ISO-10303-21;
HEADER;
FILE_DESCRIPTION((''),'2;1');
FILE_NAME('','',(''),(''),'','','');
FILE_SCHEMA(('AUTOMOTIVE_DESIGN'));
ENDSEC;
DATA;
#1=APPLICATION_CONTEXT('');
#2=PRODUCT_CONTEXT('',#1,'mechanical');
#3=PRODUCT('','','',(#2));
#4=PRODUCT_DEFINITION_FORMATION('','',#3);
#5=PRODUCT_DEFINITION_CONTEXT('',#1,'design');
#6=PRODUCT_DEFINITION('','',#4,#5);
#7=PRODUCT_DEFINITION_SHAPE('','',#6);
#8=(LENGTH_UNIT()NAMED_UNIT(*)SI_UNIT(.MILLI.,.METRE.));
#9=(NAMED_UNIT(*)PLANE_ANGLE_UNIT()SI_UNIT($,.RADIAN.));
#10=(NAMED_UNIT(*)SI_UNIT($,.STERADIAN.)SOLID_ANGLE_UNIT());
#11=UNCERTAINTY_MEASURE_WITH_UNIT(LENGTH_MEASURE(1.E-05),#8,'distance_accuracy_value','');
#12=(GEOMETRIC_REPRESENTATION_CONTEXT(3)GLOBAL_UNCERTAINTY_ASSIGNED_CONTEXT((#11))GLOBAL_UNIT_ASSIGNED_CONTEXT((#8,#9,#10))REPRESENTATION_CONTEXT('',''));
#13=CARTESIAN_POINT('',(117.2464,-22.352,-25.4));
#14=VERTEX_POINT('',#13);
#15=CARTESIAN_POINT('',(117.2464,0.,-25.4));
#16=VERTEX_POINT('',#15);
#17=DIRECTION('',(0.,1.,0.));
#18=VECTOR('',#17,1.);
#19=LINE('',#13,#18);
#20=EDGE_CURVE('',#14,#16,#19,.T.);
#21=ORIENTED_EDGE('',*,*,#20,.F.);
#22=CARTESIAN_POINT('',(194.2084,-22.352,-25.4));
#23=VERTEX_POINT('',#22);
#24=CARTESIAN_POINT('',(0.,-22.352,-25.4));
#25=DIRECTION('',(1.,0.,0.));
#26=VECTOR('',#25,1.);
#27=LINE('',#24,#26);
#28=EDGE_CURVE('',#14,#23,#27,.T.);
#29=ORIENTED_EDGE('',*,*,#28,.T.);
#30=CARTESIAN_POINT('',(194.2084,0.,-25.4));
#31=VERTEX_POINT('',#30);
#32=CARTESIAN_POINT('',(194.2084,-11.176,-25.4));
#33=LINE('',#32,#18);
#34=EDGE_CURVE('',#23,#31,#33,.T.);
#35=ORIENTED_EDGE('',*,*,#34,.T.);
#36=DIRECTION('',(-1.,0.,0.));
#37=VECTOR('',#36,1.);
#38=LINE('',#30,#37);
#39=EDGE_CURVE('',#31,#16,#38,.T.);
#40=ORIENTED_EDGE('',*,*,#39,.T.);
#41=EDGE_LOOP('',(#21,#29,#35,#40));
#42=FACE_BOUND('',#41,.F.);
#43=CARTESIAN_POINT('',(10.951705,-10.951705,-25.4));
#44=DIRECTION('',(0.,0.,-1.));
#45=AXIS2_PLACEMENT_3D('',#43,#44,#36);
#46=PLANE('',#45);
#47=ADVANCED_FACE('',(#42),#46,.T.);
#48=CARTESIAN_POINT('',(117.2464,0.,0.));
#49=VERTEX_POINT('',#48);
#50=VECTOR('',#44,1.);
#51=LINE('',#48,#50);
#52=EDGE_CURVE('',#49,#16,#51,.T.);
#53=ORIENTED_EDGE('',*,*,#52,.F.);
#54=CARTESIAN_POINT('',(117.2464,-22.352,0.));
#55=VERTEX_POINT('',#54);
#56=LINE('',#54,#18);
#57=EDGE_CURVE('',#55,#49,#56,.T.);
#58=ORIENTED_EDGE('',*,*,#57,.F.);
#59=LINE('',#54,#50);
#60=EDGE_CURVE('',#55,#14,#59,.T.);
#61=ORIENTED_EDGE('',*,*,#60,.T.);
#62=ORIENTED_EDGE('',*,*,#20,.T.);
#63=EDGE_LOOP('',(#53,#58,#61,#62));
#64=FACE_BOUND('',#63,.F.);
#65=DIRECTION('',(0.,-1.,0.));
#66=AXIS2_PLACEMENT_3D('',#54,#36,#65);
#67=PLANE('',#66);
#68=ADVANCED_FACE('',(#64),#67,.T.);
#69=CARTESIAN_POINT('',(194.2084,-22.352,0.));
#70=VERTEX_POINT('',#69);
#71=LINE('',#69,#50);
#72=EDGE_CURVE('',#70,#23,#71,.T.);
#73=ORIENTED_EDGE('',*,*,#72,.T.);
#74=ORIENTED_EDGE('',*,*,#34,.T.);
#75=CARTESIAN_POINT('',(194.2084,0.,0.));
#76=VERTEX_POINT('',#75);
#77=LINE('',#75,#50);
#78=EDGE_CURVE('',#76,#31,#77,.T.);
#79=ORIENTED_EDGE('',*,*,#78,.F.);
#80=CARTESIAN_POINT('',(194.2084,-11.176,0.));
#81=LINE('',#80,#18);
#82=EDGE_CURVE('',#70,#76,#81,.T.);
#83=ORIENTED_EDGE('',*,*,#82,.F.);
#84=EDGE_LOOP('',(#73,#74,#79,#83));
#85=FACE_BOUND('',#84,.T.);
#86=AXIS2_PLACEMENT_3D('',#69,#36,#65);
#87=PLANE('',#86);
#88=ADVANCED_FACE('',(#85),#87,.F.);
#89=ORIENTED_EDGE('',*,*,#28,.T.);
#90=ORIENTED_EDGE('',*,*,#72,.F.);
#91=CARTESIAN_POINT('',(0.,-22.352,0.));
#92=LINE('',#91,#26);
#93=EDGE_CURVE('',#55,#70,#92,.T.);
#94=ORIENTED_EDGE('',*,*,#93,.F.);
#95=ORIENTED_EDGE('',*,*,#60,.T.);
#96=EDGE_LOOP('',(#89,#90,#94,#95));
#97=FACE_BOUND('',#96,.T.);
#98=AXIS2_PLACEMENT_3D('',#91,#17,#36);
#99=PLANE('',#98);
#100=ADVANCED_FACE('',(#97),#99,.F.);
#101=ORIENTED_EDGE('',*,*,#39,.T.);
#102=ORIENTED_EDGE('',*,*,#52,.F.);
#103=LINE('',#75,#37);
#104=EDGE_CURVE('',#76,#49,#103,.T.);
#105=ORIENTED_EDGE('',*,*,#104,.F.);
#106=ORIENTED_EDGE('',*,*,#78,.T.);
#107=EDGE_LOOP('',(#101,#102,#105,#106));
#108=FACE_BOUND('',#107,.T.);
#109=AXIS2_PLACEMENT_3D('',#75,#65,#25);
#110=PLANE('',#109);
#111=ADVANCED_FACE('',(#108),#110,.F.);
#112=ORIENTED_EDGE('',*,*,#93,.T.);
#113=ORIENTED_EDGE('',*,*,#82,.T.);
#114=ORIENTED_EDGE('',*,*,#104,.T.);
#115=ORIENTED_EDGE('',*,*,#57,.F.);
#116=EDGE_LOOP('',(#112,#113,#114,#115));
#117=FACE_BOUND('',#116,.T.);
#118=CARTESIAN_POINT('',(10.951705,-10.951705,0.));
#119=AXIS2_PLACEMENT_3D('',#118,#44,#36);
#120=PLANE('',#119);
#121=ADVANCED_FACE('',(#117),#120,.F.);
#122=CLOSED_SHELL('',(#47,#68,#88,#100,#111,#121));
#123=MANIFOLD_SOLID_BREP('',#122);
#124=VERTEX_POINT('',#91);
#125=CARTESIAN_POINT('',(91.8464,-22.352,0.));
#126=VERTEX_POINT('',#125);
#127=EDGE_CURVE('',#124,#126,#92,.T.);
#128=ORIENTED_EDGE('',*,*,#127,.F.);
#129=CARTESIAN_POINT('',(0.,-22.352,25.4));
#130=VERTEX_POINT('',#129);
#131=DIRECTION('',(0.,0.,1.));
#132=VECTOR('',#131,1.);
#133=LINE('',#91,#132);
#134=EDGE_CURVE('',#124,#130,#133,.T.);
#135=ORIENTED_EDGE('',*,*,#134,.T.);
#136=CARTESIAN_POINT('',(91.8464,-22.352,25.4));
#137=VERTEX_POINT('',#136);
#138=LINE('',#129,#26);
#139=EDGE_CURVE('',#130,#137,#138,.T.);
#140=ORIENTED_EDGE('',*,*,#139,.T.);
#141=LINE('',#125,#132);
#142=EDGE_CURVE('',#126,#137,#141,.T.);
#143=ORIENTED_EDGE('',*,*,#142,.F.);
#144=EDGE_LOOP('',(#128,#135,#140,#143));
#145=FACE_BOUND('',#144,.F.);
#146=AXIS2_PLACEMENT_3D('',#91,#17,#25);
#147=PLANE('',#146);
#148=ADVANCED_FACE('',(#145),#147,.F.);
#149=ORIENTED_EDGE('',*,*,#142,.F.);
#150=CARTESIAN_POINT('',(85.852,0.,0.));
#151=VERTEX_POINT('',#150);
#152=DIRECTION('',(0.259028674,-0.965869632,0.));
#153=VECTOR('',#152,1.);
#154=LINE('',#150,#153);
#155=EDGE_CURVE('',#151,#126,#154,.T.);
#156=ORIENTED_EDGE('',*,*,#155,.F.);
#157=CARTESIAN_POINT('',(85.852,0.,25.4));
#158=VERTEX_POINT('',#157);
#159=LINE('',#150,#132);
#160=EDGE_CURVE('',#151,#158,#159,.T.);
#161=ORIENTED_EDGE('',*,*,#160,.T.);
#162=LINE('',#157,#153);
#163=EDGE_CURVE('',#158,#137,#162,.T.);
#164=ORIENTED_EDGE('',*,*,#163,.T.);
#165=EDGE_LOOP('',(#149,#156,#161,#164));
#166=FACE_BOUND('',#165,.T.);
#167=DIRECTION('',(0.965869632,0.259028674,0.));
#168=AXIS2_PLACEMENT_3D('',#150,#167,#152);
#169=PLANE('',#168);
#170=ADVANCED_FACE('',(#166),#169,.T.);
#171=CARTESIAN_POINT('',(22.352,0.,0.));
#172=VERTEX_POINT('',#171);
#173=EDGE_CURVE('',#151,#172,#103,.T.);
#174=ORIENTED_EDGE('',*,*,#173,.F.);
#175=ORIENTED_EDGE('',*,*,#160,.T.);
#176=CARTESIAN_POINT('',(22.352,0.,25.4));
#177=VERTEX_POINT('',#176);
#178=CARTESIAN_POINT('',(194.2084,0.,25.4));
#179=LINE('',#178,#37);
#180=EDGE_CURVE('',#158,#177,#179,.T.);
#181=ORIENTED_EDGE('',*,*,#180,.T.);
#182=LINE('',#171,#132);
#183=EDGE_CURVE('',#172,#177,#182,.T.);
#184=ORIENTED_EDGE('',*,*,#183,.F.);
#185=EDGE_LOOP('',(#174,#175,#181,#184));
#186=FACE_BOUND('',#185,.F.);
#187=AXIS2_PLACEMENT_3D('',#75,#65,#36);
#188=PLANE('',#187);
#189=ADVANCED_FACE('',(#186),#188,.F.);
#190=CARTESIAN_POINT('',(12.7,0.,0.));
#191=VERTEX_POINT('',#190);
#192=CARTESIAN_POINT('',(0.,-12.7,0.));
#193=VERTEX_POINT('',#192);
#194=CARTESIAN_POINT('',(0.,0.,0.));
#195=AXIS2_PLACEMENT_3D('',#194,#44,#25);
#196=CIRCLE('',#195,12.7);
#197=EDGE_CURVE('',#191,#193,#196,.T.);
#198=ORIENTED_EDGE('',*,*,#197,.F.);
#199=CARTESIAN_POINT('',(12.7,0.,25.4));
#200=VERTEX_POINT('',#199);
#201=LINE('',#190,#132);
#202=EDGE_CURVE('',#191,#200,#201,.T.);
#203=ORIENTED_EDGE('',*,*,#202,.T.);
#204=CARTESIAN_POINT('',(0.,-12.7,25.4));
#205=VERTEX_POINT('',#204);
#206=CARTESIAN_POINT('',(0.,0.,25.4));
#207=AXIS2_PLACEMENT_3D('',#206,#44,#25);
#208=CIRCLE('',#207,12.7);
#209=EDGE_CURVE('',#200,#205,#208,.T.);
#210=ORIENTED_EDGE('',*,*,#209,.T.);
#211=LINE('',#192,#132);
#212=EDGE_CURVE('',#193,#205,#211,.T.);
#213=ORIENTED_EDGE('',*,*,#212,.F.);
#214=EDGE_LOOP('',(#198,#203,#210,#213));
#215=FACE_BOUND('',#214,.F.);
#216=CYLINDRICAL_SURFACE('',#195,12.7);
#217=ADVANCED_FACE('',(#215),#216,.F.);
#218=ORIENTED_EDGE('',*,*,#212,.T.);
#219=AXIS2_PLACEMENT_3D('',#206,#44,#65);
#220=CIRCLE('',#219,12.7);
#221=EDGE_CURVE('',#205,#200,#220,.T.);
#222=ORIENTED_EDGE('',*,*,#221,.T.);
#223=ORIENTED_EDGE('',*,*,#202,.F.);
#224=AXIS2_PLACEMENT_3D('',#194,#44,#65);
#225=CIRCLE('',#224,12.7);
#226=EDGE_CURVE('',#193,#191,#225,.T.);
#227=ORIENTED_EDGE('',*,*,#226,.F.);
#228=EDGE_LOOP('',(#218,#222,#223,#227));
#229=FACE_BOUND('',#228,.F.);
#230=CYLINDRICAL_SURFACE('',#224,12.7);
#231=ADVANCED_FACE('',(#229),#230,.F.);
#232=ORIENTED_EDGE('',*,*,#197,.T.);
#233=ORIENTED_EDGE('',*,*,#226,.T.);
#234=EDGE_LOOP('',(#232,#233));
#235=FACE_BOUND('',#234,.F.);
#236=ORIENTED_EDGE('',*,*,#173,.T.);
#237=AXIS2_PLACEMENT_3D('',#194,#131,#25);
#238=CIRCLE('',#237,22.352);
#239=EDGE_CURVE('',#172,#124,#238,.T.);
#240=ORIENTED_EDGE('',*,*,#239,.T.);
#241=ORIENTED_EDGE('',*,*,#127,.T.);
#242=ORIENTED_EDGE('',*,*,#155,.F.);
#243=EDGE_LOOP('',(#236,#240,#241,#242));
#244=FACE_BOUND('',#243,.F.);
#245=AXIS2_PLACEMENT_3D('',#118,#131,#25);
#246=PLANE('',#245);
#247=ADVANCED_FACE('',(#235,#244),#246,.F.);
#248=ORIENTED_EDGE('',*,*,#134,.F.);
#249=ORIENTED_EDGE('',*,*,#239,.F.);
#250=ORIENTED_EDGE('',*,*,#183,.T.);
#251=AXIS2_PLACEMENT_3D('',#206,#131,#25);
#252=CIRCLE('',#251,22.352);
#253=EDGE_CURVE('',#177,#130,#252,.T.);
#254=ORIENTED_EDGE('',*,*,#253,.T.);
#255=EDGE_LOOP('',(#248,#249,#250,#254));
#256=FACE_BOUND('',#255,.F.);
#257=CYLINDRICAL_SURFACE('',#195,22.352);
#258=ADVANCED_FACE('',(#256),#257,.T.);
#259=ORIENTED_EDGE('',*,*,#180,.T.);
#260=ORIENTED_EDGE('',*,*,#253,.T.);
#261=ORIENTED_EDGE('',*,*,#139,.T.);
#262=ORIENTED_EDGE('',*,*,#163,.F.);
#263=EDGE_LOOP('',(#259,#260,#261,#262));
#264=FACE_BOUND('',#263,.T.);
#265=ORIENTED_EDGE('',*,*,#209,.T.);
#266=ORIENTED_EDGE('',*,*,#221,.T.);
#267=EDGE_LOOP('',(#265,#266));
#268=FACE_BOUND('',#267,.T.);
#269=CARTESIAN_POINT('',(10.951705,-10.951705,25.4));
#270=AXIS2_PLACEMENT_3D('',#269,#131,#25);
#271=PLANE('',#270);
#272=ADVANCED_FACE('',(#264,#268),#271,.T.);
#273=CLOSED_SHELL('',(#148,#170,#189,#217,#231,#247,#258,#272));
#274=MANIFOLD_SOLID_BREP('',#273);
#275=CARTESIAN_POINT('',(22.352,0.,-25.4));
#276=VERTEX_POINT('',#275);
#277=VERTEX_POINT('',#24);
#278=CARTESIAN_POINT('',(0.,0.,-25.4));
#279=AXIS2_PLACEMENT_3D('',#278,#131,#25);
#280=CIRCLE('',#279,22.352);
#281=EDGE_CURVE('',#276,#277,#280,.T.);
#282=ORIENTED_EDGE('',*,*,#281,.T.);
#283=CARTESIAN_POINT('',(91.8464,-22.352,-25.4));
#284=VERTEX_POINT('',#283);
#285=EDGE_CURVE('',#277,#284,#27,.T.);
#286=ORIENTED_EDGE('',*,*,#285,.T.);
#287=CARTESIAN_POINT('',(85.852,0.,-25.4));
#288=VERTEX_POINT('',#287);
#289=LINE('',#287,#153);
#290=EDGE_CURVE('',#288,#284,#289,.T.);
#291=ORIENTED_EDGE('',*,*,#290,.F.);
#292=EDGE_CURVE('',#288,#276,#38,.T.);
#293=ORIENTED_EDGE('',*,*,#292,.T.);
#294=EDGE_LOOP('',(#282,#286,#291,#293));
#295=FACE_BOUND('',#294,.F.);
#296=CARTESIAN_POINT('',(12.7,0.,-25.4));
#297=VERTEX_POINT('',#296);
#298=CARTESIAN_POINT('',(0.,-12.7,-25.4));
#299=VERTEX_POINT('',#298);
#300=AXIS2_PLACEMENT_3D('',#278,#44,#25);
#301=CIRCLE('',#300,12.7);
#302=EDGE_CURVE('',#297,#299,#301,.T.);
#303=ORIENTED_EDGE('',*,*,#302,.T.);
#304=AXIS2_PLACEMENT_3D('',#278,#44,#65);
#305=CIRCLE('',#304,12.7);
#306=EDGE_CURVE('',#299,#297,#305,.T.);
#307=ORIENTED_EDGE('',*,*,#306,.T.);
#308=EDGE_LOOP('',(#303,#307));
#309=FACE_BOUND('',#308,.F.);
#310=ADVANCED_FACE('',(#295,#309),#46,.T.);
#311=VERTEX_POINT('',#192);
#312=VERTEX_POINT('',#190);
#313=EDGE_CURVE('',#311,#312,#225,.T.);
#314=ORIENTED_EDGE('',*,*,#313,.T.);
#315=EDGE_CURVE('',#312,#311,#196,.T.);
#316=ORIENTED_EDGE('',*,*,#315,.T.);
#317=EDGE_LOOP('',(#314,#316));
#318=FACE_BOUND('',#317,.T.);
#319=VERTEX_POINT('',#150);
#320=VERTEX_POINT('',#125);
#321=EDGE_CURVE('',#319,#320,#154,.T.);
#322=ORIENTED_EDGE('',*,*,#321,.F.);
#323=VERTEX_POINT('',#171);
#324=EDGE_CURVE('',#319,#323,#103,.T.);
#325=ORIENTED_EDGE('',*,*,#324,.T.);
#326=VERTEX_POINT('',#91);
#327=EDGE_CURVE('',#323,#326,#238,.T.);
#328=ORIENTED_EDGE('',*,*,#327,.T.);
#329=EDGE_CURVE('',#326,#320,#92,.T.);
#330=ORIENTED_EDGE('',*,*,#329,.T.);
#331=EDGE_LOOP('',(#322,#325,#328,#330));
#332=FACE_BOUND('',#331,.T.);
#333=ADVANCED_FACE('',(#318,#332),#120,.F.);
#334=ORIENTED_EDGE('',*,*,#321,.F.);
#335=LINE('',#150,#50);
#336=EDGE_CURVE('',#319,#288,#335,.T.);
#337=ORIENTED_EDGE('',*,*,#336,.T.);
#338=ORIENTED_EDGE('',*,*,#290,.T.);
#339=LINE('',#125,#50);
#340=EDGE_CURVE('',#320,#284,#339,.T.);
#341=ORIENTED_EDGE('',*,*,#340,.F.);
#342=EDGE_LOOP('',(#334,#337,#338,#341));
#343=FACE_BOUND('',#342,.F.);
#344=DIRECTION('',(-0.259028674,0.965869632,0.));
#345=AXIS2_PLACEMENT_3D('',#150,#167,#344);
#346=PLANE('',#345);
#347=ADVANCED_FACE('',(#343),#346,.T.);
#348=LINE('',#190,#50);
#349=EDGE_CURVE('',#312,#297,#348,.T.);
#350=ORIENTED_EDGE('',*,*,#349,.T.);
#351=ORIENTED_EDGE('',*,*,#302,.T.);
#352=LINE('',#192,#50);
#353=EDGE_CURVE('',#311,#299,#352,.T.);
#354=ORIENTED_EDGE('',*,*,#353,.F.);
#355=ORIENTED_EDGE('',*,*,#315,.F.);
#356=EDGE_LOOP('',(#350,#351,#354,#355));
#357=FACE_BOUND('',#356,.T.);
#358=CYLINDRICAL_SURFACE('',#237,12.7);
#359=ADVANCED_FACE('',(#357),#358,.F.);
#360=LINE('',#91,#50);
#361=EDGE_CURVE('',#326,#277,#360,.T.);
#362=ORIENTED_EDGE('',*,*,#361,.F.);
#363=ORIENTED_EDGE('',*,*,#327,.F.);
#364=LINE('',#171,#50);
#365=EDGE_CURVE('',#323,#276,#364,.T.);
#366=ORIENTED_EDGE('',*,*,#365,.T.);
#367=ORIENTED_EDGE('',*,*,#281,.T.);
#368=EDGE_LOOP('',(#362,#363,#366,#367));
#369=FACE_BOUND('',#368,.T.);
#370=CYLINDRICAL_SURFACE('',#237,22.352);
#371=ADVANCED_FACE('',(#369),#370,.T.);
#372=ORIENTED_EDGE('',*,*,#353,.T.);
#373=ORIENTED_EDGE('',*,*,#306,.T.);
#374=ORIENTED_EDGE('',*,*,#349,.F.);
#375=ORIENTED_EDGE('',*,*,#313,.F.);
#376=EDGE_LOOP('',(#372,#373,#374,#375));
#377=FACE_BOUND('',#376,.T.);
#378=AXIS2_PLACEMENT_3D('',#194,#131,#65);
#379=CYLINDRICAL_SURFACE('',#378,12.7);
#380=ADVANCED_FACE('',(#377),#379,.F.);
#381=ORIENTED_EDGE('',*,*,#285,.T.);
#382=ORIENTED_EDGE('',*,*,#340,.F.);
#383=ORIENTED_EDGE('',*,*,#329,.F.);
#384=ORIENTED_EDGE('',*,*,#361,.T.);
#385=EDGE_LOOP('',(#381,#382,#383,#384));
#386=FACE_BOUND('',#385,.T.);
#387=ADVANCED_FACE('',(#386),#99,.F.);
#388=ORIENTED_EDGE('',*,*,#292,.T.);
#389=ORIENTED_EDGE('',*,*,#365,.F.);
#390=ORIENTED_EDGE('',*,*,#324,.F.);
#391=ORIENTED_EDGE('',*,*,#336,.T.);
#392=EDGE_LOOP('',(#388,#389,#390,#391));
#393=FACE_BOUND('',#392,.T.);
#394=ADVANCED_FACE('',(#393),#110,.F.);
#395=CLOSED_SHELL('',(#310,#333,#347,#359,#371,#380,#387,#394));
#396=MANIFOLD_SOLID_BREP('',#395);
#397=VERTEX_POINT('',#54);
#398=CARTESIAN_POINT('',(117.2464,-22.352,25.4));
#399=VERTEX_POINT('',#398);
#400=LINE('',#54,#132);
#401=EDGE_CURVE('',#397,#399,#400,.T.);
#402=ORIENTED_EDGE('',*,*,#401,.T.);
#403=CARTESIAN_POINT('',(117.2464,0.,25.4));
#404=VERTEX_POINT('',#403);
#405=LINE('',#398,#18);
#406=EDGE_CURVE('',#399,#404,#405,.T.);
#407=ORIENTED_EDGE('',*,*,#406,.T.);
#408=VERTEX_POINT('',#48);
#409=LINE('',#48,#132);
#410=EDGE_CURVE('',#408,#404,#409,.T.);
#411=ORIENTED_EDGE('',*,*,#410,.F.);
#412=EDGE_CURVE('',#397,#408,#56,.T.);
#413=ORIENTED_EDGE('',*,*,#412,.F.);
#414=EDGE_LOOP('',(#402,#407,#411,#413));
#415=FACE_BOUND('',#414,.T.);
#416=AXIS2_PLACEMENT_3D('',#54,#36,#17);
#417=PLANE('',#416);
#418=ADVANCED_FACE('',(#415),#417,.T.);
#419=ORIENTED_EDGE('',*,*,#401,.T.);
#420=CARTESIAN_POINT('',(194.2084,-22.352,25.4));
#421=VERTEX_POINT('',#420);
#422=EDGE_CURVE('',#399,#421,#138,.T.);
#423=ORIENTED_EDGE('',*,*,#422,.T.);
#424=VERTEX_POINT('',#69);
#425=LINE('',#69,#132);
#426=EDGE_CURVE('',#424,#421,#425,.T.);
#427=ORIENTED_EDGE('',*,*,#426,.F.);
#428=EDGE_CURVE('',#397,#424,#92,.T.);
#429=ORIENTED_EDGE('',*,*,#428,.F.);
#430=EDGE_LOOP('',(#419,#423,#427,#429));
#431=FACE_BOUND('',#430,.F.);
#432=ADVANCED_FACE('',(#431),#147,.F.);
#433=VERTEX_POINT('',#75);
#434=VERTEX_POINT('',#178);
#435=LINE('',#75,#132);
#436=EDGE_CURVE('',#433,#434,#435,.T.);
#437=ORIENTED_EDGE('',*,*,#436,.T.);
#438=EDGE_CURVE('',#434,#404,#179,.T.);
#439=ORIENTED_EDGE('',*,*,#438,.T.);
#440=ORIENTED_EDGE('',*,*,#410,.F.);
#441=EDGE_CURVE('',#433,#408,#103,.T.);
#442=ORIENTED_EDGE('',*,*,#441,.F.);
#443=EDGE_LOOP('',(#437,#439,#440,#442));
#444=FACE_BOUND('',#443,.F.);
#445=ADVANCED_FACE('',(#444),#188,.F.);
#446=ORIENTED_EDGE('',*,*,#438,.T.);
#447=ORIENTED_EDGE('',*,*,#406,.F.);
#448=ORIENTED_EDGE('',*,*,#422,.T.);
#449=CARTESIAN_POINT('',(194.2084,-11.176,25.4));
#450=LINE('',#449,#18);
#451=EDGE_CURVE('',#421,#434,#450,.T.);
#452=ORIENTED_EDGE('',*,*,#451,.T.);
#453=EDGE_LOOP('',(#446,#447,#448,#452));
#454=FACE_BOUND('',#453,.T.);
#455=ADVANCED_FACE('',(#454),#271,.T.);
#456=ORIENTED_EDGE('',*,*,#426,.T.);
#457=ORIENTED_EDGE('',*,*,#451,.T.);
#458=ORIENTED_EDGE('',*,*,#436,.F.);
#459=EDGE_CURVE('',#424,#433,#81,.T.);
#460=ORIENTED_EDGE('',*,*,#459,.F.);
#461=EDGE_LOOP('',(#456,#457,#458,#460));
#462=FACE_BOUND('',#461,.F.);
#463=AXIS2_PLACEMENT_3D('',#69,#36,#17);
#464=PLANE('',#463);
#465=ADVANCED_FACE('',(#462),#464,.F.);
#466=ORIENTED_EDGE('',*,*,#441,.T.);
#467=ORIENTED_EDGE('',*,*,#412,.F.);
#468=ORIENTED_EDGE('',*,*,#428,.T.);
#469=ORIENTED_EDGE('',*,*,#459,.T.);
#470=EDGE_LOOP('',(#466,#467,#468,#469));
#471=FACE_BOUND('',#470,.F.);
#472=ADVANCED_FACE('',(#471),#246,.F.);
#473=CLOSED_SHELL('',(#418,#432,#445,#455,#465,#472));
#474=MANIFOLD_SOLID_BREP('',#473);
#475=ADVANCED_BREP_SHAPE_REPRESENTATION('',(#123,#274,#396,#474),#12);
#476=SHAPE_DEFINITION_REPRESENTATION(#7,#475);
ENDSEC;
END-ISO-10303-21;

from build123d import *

# Parameters (mm, degrees)
F0_W     = 76.962
F0_H     = 22.352
F1_DEPTH = 25.4
F2_DEPTH = 25.4


with BuildPart() as f1:
    # F0 (on Top) → F1 (new body)
    with BuildSketch(Plane.XY):
        with BuildLine():
            Line((22.352, 0), (12.7, 0))
            ThreePointArc((12.7, 0), (8.9802561211, -8.9802561211), (0, -12.7))
            Line((0, -12.7), (0, -22.352))
            ThreePointArc((0, -22.352), (15.8052507731, -15.8052507731), (22.352, 0))
        make_face()
        with BuildLine():
            ThreePointArc((0, -12.7), (-8.9802561211, 8.9802561211), (12.7, 0))
            Line((12.7, 0), (22.352, 0))
            ThreePointArc((22.352, 0), (-15.8052507731, 15.8052507731), (0, -22.352))
            Line((0, -22.352), (0, -12.7))
        make_face()
        with BuildLine():
            Line((85.852, 0), (22.352, 0))
            ThreePointArc((22.352, 0), (15.8052507731, -15.8052507731), (0, -22.352))
            Line((0, -22.352), (91.8464, -22.352))
            Line((91.8464, -22.352), (85.852, 0))
        make_face()
        Polygon((117.2464, 0), (85.852, 0), (91.8464, -22.352), (117.2464, -22.352), align=None)
        with Locations((155.7274, -11.176)):
            Rectangle(F0_W, F0_H)
    extrude(amount=F1_DEPTH)

    # F0 (on Top) → F2 (cut)
    with BuildSketch(Plane.XY):
        Polygon((117.2464, 0), (85.852, 0), (91.8464, -22.352), (117.2464, -22.352), align=None)
    extrude(amount=F2_DEPTH, mode=Mode.SUBTRACT)


with BuildPart() as f3_1:
    # F3: instance of F1
    add(f1.part.mirror(Plane.XY))


solid = Compound([f1.part, f3_1.part])
